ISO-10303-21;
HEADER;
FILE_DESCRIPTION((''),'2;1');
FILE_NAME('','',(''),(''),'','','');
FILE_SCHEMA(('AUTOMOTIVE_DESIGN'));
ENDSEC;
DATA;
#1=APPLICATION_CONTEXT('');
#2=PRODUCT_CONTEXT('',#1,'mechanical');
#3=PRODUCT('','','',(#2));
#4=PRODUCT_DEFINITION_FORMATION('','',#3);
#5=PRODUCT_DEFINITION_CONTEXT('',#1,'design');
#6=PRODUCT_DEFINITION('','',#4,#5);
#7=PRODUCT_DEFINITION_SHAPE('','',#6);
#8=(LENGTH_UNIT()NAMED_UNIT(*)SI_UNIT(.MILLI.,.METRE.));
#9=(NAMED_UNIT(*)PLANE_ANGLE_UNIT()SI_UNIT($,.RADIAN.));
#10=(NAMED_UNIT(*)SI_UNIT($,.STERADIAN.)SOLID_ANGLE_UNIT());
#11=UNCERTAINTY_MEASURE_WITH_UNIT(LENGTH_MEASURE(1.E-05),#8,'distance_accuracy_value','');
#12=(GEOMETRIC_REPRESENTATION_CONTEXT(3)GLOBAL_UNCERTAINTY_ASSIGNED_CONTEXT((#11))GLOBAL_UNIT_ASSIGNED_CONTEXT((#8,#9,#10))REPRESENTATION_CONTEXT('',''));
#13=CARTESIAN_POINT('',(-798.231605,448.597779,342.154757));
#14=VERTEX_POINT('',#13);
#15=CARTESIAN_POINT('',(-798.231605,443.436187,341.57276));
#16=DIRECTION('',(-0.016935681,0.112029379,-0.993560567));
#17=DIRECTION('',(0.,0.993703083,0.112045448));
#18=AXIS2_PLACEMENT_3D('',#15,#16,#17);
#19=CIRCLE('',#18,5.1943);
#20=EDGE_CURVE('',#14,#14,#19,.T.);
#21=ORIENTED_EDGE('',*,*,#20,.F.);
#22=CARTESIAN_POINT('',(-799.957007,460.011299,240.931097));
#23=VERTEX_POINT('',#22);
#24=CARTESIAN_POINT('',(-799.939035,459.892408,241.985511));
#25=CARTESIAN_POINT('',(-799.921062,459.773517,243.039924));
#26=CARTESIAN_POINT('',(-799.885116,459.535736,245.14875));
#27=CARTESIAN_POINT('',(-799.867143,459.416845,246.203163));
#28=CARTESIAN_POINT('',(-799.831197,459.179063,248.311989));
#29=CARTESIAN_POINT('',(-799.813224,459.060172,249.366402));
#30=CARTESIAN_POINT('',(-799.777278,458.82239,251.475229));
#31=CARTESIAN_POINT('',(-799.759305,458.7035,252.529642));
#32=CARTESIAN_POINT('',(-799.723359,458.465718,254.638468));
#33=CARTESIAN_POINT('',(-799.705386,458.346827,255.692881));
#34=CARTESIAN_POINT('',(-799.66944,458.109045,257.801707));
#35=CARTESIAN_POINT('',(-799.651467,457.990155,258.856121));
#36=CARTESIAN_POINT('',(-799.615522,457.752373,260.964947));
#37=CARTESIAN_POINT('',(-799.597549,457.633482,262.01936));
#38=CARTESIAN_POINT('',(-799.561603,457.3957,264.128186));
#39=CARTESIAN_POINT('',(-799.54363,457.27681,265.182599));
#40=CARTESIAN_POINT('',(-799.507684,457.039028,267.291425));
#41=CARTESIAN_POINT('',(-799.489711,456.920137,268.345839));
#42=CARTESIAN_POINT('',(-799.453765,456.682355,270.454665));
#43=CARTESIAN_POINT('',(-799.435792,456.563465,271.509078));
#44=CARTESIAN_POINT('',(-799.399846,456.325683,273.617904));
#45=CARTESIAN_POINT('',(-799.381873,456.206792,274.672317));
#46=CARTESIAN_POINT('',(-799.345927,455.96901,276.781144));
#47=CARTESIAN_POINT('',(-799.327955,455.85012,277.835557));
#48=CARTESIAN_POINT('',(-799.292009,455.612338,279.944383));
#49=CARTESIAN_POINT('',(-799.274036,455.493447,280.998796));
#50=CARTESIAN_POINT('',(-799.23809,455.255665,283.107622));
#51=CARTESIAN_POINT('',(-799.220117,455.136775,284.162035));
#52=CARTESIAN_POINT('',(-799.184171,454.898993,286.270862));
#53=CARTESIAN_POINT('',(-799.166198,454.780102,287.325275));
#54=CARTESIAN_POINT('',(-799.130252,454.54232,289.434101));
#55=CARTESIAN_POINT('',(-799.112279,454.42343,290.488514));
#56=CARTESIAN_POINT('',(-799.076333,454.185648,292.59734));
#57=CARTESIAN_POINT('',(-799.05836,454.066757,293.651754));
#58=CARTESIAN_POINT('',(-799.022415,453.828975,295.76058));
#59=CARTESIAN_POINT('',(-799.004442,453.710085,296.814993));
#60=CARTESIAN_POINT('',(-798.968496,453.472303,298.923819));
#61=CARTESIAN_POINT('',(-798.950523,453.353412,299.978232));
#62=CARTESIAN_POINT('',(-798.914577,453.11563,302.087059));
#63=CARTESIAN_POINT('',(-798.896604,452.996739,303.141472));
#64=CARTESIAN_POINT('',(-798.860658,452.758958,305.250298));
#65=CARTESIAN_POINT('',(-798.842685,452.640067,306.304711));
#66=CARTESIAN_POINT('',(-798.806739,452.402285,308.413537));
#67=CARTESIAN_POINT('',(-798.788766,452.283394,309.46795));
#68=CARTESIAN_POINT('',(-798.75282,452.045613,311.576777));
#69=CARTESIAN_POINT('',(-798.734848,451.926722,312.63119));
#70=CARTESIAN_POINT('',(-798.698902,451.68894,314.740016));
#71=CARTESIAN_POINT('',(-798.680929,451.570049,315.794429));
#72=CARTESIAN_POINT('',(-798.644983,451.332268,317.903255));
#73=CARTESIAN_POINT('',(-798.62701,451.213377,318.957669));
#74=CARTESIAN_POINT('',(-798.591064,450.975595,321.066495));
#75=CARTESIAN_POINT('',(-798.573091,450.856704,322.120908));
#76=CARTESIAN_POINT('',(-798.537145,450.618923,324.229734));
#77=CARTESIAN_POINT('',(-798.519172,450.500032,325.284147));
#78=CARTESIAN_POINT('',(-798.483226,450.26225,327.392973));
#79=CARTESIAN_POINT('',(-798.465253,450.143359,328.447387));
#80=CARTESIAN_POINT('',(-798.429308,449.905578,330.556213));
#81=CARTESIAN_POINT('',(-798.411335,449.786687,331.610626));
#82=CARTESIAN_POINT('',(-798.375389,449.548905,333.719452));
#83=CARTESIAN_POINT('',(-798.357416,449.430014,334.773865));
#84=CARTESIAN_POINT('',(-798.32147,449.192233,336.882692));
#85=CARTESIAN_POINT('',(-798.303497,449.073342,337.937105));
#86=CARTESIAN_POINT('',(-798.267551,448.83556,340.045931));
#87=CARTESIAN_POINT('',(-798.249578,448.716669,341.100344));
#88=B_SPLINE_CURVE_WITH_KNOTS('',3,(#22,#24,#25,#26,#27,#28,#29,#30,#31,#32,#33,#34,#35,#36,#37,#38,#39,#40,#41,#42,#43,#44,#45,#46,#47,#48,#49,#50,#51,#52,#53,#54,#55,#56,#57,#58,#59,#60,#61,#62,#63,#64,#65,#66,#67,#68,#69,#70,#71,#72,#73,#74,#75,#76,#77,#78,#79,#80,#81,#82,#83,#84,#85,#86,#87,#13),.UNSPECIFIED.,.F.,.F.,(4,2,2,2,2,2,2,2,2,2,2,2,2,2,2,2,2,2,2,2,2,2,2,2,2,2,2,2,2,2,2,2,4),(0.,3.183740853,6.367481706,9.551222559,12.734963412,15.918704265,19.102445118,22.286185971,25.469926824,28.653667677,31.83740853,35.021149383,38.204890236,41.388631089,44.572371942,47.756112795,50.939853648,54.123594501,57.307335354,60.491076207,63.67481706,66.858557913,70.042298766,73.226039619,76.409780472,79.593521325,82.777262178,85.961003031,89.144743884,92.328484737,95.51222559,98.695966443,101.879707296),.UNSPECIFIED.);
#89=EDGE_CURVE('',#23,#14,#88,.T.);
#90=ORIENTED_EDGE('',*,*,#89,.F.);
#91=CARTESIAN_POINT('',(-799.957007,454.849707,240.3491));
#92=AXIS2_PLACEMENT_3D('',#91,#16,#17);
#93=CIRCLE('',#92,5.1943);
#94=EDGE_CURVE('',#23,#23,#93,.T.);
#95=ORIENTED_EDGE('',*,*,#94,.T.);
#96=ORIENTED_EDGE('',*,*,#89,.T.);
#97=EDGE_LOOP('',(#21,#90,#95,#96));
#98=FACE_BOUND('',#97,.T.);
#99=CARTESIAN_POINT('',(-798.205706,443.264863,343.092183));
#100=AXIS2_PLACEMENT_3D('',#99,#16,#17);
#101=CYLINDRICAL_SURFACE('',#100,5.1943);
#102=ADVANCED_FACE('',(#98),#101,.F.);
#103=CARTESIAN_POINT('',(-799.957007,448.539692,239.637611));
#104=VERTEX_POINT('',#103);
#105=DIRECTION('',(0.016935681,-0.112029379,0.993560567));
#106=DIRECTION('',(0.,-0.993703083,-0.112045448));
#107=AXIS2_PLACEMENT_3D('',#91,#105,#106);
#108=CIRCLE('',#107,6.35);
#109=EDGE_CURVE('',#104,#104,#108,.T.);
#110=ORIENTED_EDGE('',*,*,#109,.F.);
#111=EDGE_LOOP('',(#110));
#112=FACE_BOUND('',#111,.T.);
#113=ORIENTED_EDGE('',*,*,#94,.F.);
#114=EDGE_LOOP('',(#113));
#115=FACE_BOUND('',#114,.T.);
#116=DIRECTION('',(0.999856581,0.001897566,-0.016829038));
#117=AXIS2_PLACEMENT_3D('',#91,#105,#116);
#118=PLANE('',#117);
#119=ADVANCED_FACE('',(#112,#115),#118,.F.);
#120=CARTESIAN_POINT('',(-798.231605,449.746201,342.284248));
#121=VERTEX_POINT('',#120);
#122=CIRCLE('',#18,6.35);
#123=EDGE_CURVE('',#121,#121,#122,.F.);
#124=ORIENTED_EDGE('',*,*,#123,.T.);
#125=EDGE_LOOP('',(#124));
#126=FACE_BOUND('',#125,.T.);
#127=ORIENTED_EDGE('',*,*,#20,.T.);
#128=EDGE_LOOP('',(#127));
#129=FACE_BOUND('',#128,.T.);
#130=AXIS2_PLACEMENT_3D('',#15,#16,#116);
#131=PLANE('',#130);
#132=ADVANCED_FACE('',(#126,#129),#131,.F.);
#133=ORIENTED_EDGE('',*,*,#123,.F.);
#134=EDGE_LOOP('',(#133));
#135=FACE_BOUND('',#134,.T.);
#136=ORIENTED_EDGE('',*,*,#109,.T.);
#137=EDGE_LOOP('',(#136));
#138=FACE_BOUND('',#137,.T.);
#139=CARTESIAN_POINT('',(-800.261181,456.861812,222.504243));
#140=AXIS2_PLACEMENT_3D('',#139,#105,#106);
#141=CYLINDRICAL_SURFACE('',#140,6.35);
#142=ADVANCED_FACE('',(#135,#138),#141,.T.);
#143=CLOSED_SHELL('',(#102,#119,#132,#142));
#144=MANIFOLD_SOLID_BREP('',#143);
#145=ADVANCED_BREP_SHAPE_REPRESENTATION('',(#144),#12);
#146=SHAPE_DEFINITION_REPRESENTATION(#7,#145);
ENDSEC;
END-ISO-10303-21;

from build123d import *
from OCP.BRepAlgoAPI import BRepAlgoAPI_Cut
from OCP.TopTools import TopTools_ListOfShape

# Parameters (mm, degrees)
BOSS_EXTRUDE1_DEPTH      = 50.939854
BOSS_EXTRUDE1_DEPTH_BACK = 50.939854
SKETCH1_R                = 6.35
SKETCH2_R                = 5.1943
CUT_EXTRUDE1_DEPTH       = 957.325417785


with BuildPart() as part:
    # Sketch1 → Boss-Extrude1 (new, two sides: drawn at the far end of the back side and taken through both)
    with BuildSketch(Plane(origin=(-799.09430633, 449.142946775, 290.960929644), x_dir=(0.999849908974053, 0.005527775299574572, -0.016419598801901716), z_dir=(-0.016935681028085545, 0.11202937882799638, -0.99356056734732)).offset(-BOSS_EXTRUDE1_DEPTH_BACK)):
        with Locations(Location((0, 0, 0), (0, 0, 90.2093149))):
            Circle(SKETCH1_R)
    extrude(amount=BOSS_EXTRUDE1_DEPTH + BOSS_EXTRUDE1_DEPTH_BACK)


with BuildPart() as cut_extrude1_tool:
    # Sketch2 → Cut-Extrude1 (new, through all)
    with BuildSketch(Plane(origin=(2.951839092, -19.526389243, 173.174667012), x_dir=(0.999849908974053, 0.005527775299574602, -0.01641959880190172), z_dir=(-0.01693568102808555, 0.1120293788279964, -0.9935605673473199))):
        with Locations(Location((-801.269069891, -481.846011212, 0), (0, 0, 270.2093149))):
            Circle(SKETCH2_R)
    extrude(amount=-CUT_EXTRUDE1_DEPTH)


with BuildPart() as part_1:
    add(part.part)

    # Cut-Extrude1: cut by cut_extrude1_tool, with a tolerance
    cut_extrude1_stock = TopTools_ListOfShape()
    cut_extrude1_stock.Append(part_1.part.wrapped)
    cut_extrude1_tools = TopTools_ListOfShape()
    cut_extrude1_tools.Append(cut_extrude1_tool.part.wrapped)
    cut_extrude1_cut = BRepAlgoAPI_Cut()
    cut_extrude1_cut.SetArguments(cut_extrude1_stock)
    cut_extrude1_cut.SetTools(cut_extrude1_tools)
    cut_extrude1_cut.SetFuzzyValue(0.00001)
    cut_extrude1_cut.Build()
    add(Compound.cast(cut_extrude1_cut.Shape()).solids(), mode=Mode.REPLACE)


solid = part_1.part
